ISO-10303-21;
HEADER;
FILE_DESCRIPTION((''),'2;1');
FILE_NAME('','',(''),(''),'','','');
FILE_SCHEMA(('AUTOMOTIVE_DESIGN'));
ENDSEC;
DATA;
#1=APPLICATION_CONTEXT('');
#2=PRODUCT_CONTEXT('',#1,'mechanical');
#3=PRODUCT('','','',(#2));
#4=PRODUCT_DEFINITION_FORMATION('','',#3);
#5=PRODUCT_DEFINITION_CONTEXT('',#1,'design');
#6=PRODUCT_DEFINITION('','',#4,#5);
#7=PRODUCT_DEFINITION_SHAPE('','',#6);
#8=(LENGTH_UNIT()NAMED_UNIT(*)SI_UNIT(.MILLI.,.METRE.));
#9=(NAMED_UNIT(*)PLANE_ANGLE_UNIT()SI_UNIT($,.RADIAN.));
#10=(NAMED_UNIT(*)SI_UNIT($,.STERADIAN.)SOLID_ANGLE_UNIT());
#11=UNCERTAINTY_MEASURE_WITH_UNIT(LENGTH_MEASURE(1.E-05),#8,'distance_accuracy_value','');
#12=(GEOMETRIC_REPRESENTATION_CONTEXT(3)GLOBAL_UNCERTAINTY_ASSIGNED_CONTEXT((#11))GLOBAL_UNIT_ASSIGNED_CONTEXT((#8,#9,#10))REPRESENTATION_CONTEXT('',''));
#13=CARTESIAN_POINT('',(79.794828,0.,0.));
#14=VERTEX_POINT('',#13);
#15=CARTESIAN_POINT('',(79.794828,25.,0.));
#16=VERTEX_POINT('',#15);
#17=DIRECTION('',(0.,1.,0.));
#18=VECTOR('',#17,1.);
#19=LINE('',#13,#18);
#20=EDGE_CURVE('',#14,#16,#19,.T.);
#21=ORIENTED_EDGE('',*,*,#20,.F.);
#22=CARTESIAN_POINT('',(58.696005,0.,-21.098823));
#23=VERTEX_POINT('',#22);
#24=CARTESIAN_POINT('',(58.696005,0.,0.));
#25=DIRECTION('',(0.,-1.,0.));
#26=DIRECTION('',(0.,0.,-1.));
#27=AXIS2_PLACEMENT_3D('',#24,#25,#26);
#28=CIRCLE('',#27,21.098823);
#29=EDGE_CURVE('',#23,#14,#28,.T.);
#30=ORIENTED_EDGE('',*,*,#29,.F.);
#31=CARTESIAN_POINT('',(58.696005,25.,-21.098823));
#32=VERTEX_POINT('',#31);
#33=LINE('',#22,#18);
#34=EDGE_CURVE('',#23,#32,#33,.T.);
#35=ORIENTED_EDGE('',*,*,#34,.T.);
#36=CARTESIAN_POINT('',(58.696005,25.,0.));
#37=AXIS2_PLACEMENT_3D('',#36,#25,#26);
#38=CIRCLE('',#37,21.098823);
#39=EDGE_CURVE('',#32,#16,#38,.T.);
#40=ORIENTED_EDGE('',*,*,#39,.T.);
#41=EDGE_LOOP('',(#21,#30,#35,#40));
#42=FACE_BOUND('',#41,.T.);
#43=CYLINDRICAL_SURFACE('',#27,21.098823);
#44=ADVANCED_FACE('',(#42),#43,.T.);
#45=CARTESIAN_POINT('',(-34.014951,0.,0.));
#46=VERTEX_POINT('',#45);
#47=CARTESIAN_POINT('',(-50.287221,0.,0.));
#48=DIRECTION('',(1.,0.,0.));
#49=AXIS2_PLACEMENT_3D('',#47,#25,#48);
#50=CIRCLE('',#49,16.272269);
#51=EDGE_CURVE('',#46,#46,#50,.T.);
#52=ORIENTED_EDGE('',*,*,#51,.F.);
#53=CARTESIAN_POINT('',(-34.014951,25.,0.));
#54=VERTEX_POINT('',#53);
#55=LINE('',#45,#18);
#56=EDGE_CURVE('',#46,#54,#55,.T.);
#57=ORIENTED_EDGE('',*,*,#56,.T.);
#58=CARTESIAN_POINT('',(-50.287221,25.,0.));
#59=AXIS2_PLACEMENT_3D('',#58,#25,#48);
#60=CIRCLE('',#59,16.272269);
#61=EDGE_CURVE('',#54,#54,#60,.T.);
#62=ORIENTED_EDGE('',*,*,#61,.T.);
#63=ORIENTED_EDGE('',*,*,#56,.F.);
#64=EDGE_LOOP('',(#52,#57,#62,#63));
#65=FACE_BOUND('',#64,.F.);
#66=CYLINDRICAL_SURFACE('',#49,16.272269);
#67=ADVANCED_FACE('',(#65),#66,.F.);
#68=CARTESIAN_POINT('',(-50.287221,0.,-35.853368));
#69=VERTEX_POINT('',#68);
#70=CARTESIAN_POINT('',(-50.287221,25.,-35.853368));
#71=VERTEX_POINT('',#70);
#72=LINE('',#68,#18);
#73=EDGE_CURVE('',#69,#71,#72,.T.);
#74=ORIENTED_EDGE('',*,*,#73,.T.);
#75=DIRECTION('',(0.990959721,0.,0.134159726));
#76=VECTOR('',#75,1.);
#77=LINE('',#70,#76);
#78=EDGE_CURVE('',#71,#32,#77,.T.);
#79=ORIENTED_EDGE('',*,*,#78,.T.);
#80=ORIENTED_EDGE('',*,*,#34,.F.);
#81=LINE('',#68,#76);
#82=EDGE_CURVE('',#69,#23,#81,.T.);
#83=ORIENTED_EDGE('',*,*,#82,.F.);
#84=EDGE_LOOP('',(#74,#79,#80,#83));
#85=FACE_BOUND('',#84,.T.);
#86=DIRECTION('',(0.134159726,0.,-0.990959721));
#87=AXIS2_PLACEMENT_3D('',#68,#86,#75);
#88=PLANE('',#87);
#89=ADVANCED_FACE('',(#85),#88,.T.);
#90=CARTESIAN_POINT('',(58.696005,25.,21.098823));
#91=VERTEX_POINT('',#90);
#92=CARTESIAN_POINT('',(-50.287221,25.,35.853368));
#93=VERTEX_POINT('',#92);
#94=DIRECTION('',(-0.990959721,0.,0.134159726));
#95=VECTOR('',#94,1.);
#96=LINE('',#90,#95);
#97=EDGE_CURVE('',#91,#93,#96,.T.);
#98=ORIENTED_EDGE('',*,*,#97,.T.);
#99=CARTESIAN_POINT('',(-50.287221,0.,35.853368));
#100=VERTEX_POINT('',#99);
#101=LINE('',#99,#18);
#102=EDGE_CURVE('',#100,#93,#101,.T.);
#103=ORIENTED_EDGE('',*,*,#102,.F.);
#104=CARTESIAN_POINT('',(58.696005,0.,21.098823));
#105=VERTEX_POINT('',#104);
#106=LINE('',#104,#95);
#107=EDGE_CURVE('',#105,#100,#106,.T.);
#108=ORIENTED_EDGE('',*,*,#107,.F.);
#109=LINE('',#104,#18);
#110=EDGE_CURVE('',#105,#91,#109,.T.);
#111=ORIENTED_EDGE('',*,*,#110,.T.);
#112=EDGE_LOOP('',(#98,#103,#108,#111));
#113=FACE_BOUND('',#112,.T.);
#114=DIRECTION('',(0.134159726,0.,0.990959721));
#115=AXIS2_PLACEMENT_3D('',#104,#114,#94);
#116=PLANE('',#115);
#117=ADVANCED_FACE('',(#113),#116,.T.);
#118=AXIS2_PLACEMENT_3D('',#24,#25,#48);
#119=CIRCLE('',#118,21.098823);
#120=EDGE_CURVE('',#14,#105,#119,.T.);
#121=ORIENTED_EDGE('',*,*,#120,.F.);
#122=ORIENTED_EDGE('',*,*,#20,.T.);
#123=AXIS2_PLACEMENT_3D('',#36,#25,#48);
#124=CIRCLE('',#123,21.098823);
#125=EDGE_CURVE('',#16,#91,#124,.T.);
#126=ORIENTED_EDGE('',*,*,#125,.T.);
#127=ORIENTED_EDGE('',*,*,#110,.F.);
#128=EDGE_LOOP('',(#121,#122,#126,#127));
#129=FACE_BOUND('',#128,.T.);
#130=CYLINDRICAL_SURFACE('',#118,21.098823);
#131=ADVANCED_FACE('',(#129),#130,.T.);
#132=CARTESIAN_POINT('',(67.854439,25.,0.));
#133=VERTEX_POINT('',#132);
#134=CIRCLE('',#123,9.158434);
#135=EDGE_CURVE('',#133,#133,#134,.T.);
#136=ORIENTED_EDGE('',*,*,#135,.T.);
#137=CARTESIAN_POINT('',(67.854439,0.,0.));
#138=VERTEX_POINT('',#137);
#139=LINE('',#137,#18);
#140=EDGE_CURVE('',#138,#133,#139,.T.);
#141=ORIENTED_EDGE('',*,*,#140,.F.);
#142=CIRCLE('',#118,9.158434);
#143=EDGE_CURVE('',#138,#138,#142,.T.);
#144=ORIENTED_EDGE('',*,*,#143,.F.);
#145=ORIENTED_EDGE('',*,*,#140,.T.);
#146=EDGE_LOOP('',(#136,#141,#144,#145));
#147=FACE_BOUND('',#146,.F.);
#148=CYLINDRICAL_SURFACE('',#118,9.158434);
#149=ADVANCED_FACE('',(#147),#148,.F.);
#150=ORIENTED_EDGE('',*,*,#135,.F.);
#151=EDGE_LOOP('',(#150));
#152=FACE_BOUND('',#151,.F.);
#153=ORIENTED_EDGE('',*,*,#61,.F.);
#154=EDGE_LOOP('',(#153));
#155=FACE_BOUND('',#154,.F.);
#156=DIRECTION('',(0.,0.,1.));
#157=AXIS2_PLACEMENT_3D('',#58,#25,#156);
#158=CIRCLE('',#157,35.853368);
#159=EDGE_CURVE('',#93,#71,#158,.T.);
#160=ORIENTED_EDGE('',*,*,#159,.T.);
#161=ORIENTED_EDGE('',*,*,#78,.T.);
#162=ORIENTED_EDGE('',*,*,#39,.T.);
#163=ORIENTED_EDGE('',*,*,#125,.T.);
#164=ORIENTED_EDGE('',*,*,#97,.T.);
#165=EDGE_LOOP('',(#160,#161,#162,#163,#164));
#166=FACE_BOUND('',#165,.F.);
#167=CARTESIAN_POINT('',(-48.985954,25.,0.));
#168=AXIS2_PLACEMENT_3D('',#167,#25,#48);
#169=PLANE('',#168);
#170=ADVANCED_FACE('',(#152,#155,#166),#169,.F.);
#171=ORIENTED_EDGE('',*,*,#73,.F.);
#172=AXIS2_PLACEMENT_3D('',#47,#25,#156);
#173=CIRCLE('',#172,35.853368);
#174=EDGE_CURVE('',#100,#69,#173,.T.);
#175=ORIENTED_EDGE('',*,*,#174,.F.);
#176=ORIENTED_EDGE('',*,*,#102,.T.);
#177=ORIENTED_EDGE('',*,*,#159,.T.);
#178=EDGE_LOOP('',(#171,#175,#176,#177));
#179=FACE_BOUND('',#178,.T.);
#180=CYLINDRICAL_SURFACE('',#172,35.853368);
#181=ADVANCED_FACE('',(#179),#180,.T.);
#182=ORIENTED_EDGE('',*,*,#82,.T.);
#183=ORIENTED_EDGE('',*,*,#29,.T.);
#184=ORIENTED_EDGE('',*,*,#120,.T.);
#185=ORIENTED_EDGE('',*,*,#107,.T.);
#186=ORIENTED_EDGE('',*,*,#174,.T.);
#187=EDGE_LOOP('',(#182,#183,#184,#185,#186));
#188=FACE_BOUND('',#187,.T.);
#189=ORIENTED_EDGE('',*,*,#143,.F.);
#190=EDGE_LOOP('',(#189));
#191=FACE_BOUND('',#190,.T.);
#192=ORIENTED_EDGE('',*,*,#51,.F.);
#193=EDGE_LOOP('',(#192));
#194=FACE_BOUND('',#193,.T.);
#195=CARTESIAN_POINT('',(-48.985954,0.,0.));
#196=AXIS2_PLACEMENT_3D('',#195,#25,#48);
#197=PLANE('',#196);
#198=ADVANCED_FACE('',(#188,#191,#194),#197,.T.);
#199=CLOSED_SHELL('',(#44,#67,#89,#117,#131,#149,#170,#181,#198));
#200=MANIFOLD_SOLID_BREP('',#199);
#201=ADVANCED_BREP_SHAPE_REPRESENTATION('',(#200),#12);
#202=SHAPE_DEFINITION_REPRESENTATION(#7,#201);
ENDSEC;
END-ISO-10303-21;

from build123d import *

# Parameters (mm, degrees)
F0_R     = 16.2722693288
F0_R_2   = 9.1584338909
F1_DEPTH = 25


# Not quite as in the source:
# - the program builds the solid bodies; features that only make, move or delete a surface that nothing else refers to are left out


with BuildPart() as f1:
    # F0 (on Front) → F1 (new body)
    with BuildSketch(Plane.XZ):
        with BuildLine():
            Line((-40.7540334754, 34.5627303773), (-50.2872206271, 35.8533678809))
            ThreePointArc((-50.2872206271, 35.8533678809), (-86.140588508, 0), (-50.2872206271, -35.8533678809))
            Line((-50.2872206271, -35.8533678809), (-40.7540334754, -34.5627303773))
            ThreePointArc((-40.7540334754, -34.5627303773), (-21.7630128867, -21.721730161), (-14.4338527462, 0))
            ThreePointArc((-14.4338527462, 0), (-21.7630128867, 21.721730161), (-40.7540334754, 34.5627303773))
        make_face()
        with Locations((-50.2872206271, 0)):
            Circle(F0_R, mode=Mode.SUBTRACT)
        with BuildLine():
            Line((58.6960054934, 21.0988228735), (-40.7540334754, 34.5627303773))
            ThreePointArc((-40.7540334754, 34.5627303773), (-21.7630128867, 21.721730161), (-14.4338527462, 0))
            ThreePointArc((-14.4338527462, 0), (-21.7630128867, -21.721730161), (-40.7540334754, -34.5627303773))
            Line((-40.7540334754, -34.5627303773), (58.6960054934, -21.0988228735))
            ThreePointArc((58.6960054934, -21.0988228735), (37.59718262, 0), (58.6960054934, 21.0988228735))
        make_face()
        with BuildLine():
            ThreePointArc((79.7948283669, 0), (73.6151262223, 14.9191207289), (58.6960054934, 21.0988228735))
            ThreePointArc((58.6960054934, 21.0988228735), (37.59718262, 0), (58.6960054934, -21.0988228735))
            ThreePointArc((58.6960054934, -21.0988228735), (73.6151262223, -14.9191207289), (79.7948283669, 0))
        make_face()
        with Locations((58.6960054934, 0)):
            Circle(F0_R_2, mode=Mode.SUBTRACT)
    extrude(amount=-F1_DEPTH)


solid = f1.part
